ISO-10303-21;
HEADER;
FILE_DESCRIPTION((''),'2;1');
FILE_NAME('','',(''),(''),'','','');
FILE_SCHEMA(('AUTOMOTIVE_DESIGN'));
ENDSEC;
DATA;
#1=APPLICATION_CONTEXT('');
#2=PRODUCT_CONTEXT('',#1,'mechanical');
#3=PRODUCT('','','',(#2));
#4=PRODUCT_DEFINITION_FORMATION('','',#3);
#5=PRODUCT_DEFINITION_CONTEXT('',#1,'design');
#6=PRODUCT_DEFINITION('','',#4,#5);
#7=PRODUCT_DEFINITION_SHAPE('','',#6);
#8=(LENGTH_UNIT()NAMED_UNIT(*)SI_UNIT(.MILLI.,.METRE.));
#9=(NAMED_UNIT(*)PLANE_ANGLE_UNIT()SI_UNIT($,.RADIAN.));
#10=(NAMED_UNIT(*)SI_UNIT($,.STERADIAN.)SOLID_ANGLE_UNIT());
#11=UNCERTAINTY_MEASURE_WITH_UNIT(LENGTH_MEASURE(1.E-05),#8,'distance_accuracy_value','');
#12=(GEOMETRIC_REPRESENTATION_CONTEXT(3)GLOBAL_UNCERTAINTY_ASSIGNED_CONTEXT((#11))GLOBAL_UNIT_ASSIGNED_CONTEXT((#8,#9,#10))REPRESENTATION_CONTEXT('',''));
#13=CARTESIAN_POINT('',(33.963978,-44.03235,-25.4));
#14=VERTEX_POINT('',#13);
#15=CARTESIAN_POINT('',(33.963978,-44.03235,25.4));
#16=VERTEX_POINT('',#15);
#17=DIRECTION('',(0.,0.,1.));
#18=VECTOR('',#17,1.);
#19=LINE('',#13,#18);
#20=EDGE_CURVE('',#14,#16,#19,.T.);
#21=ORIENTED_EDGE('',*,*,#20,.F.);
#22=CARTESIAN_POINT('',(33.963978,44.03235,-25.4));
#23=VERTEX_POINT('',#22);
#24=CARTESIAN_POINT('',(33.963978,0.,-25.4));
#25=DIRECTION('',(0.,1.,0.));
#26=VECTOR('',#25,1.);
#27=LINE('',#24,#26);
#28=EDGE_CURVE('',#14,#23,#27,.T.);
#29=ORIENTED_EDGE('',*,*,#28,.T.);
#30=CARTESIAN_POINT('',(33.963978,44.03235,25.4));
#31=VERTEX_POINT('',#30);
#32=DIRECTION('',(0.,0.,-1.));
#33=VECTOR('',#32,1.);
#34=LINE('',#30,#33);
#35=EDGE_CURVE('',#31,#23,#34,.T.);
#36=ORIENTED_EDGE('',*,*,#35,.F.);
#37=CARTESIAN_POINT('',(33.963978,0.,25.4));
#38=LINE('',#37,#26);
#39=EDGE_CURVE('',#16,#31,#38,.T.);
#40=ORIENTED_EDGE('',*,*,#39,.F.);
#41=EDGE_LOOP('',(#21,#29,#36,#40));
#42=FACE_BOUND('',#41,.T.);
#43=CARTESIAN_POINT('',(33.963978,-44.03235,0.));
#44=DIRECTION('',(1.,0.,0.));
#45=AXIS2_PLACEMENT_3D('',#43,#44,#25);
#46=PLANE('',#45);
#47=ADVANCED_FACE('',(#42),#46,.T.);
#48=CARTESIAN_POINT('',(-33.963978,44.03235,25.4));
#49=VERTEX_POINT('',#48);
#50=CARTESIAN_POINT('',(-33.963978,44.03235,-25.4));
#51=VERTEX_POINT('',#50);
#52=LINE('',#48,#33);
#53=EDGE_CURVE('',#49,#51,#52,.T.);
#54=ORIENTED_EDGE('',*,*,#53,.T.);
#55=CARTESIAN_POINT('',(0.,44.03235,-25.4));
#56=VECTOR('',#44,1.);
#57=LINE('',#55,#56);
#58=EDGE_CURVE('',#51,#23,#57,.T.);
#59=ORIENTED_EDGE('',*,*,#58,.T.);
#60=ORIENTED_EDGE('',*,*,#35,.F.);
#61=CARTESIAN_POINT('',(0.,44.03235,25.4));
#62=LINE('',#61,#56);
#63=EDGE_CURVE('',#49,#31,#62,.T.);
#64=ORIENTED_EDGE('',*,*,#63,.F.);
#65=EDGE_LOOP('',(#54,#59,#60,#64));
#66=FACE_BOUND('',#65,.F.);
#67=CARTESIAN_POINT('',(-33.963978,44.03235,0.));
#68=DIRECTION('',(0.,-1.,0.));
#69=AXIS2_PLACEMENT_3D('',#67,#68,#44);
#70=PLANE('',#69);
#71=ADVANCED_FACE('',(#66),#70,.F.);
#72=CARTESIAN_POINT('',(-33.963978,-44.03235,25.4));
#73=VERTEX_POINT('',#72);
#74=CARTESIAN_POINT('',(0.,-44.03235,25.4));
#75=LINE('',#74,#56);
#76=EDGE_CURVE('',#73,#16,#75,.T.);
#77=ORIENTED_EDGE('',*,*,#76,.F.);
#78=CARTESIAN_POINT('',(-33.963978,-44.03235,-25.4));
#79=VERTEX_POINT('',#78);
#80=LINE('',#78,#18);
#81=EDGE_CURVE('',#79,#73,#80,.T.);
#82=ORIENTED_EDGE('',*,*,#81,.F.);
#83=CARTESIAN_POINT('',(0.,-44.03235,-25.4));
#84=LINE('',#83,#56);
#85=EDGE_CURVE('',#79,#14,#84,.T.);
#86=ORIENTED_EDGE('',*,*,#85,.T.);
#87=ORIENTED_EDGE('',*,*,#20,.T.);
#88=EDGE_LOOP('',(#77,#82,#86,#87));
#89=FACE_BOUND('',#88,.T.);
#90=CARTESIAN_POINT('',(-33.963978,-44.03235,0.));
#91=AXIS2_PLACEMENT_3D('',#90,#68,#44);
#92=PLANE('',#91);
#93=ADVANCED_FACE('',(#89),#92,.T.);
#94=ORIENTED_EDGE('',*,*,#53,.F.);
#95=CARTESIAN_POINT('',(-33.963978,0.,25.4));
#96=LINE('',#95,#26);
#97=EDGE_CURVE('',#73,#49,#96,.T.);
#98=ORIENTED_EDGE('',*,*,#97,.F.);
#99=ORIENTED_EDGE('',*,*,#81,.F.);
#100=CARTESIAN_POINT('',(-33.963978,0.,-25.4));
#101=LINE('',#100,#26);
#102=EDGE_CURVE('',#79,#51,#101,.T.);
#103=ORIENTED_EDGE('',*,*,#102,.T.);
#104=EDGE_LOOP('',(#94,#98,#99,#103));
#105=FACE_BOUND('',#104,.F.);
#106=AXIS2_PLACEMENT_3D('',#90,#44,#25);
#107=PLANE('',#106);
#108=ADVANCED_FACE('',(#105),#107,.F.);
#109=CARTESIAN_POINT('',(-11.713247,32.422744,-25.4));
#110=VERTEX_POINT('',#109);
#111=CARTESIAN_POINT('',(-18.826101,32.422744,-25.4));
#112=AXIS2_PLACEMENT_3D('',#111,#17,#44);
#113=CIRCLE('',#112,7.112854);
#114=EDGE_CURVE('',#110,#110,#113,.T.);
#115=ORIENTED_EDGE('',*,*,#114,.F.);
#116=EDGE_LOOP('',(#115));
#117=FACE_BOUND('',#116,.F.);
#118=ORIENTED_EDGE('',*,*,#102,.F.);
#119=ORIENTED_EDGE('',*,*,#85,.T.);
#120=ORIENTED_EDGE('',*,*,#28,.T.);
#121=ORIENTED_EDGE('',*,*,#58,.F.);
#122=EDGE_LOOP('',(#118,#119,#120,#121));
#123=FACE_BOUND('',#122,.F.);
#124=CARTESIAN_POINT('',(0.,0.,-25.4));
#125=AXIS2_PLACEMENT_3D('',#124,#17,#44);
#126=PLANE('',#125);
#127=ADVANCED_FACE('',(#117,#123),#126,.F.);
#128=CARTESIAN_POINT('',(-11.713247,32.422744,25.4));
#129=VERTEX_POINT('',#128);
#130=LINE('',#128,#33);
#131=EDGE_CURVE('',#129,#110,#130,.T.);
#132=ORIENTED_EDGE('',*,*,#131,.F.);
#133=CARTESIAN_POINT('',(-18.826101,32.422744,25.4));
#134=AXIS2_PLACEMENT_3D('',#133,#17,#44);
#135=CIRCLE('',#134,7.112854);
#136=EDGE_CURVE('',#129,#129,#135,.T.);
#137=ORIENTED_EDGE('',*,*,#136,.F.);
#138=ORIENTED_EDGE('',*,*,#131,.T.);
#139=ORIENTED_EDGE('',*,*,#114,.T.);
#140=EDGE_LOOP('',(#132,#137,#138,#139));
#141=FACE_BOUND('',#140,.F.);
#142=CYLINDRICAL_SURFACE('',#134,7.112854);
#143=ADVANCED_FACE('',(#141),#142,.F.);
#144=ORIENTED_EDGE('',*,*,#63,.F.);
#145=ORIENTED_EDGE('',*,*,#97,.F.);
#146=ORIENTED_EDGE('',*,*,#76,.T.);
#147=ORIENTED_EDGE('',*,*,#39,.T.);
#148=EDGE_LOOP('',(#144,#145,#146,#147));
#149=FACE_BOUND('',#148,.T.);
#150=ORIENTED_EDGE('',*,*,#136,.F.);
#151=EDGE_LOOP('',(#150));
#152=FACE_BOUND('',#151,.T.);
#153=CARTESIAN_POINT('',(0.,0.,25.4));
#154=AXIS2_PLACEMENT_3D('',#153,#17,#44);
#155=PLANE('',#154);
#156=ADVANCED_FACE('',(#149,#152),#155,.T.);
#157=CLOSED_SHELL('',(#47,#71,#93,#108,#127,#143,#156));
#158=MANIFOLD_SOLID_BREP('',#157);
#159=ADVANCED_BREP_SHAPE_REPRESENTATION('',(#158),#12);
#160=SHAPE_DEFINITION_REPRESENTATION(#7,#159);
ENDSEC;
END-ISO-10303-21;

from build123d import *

# Parameters (mm, degrees)
F0_W     = 67.9279565811
F0_H     = 88.0647003651
F1_DEPTH = 25.4
F2_R     = 7.1128535292
F3_DEPTH = 50.801


# Not quite as in the source:
# - a feature of the source that left no trace in its solid (it failed there, or was rolled back) is left out


with BuildPart() as f1:
    # F0 (on Top) → F1 (new body, symmetric)
    with BuildSketch(Plane.XY):
        Rectangle(F0_W, F0_H)
    extrude(amount=F1_DEPTH, both=True)

    # F2 (on face) → F3 (cut, through all)
    with BuildSketch(Plane.XY.offset(25.4)):
        with Locations((-18.8261009753, 32.4227437377)):
            Circle(F2_R)
    extrude(amount=-F3_DEPTH, mode=Mode.SUBTRACT)


solid = f1.part
